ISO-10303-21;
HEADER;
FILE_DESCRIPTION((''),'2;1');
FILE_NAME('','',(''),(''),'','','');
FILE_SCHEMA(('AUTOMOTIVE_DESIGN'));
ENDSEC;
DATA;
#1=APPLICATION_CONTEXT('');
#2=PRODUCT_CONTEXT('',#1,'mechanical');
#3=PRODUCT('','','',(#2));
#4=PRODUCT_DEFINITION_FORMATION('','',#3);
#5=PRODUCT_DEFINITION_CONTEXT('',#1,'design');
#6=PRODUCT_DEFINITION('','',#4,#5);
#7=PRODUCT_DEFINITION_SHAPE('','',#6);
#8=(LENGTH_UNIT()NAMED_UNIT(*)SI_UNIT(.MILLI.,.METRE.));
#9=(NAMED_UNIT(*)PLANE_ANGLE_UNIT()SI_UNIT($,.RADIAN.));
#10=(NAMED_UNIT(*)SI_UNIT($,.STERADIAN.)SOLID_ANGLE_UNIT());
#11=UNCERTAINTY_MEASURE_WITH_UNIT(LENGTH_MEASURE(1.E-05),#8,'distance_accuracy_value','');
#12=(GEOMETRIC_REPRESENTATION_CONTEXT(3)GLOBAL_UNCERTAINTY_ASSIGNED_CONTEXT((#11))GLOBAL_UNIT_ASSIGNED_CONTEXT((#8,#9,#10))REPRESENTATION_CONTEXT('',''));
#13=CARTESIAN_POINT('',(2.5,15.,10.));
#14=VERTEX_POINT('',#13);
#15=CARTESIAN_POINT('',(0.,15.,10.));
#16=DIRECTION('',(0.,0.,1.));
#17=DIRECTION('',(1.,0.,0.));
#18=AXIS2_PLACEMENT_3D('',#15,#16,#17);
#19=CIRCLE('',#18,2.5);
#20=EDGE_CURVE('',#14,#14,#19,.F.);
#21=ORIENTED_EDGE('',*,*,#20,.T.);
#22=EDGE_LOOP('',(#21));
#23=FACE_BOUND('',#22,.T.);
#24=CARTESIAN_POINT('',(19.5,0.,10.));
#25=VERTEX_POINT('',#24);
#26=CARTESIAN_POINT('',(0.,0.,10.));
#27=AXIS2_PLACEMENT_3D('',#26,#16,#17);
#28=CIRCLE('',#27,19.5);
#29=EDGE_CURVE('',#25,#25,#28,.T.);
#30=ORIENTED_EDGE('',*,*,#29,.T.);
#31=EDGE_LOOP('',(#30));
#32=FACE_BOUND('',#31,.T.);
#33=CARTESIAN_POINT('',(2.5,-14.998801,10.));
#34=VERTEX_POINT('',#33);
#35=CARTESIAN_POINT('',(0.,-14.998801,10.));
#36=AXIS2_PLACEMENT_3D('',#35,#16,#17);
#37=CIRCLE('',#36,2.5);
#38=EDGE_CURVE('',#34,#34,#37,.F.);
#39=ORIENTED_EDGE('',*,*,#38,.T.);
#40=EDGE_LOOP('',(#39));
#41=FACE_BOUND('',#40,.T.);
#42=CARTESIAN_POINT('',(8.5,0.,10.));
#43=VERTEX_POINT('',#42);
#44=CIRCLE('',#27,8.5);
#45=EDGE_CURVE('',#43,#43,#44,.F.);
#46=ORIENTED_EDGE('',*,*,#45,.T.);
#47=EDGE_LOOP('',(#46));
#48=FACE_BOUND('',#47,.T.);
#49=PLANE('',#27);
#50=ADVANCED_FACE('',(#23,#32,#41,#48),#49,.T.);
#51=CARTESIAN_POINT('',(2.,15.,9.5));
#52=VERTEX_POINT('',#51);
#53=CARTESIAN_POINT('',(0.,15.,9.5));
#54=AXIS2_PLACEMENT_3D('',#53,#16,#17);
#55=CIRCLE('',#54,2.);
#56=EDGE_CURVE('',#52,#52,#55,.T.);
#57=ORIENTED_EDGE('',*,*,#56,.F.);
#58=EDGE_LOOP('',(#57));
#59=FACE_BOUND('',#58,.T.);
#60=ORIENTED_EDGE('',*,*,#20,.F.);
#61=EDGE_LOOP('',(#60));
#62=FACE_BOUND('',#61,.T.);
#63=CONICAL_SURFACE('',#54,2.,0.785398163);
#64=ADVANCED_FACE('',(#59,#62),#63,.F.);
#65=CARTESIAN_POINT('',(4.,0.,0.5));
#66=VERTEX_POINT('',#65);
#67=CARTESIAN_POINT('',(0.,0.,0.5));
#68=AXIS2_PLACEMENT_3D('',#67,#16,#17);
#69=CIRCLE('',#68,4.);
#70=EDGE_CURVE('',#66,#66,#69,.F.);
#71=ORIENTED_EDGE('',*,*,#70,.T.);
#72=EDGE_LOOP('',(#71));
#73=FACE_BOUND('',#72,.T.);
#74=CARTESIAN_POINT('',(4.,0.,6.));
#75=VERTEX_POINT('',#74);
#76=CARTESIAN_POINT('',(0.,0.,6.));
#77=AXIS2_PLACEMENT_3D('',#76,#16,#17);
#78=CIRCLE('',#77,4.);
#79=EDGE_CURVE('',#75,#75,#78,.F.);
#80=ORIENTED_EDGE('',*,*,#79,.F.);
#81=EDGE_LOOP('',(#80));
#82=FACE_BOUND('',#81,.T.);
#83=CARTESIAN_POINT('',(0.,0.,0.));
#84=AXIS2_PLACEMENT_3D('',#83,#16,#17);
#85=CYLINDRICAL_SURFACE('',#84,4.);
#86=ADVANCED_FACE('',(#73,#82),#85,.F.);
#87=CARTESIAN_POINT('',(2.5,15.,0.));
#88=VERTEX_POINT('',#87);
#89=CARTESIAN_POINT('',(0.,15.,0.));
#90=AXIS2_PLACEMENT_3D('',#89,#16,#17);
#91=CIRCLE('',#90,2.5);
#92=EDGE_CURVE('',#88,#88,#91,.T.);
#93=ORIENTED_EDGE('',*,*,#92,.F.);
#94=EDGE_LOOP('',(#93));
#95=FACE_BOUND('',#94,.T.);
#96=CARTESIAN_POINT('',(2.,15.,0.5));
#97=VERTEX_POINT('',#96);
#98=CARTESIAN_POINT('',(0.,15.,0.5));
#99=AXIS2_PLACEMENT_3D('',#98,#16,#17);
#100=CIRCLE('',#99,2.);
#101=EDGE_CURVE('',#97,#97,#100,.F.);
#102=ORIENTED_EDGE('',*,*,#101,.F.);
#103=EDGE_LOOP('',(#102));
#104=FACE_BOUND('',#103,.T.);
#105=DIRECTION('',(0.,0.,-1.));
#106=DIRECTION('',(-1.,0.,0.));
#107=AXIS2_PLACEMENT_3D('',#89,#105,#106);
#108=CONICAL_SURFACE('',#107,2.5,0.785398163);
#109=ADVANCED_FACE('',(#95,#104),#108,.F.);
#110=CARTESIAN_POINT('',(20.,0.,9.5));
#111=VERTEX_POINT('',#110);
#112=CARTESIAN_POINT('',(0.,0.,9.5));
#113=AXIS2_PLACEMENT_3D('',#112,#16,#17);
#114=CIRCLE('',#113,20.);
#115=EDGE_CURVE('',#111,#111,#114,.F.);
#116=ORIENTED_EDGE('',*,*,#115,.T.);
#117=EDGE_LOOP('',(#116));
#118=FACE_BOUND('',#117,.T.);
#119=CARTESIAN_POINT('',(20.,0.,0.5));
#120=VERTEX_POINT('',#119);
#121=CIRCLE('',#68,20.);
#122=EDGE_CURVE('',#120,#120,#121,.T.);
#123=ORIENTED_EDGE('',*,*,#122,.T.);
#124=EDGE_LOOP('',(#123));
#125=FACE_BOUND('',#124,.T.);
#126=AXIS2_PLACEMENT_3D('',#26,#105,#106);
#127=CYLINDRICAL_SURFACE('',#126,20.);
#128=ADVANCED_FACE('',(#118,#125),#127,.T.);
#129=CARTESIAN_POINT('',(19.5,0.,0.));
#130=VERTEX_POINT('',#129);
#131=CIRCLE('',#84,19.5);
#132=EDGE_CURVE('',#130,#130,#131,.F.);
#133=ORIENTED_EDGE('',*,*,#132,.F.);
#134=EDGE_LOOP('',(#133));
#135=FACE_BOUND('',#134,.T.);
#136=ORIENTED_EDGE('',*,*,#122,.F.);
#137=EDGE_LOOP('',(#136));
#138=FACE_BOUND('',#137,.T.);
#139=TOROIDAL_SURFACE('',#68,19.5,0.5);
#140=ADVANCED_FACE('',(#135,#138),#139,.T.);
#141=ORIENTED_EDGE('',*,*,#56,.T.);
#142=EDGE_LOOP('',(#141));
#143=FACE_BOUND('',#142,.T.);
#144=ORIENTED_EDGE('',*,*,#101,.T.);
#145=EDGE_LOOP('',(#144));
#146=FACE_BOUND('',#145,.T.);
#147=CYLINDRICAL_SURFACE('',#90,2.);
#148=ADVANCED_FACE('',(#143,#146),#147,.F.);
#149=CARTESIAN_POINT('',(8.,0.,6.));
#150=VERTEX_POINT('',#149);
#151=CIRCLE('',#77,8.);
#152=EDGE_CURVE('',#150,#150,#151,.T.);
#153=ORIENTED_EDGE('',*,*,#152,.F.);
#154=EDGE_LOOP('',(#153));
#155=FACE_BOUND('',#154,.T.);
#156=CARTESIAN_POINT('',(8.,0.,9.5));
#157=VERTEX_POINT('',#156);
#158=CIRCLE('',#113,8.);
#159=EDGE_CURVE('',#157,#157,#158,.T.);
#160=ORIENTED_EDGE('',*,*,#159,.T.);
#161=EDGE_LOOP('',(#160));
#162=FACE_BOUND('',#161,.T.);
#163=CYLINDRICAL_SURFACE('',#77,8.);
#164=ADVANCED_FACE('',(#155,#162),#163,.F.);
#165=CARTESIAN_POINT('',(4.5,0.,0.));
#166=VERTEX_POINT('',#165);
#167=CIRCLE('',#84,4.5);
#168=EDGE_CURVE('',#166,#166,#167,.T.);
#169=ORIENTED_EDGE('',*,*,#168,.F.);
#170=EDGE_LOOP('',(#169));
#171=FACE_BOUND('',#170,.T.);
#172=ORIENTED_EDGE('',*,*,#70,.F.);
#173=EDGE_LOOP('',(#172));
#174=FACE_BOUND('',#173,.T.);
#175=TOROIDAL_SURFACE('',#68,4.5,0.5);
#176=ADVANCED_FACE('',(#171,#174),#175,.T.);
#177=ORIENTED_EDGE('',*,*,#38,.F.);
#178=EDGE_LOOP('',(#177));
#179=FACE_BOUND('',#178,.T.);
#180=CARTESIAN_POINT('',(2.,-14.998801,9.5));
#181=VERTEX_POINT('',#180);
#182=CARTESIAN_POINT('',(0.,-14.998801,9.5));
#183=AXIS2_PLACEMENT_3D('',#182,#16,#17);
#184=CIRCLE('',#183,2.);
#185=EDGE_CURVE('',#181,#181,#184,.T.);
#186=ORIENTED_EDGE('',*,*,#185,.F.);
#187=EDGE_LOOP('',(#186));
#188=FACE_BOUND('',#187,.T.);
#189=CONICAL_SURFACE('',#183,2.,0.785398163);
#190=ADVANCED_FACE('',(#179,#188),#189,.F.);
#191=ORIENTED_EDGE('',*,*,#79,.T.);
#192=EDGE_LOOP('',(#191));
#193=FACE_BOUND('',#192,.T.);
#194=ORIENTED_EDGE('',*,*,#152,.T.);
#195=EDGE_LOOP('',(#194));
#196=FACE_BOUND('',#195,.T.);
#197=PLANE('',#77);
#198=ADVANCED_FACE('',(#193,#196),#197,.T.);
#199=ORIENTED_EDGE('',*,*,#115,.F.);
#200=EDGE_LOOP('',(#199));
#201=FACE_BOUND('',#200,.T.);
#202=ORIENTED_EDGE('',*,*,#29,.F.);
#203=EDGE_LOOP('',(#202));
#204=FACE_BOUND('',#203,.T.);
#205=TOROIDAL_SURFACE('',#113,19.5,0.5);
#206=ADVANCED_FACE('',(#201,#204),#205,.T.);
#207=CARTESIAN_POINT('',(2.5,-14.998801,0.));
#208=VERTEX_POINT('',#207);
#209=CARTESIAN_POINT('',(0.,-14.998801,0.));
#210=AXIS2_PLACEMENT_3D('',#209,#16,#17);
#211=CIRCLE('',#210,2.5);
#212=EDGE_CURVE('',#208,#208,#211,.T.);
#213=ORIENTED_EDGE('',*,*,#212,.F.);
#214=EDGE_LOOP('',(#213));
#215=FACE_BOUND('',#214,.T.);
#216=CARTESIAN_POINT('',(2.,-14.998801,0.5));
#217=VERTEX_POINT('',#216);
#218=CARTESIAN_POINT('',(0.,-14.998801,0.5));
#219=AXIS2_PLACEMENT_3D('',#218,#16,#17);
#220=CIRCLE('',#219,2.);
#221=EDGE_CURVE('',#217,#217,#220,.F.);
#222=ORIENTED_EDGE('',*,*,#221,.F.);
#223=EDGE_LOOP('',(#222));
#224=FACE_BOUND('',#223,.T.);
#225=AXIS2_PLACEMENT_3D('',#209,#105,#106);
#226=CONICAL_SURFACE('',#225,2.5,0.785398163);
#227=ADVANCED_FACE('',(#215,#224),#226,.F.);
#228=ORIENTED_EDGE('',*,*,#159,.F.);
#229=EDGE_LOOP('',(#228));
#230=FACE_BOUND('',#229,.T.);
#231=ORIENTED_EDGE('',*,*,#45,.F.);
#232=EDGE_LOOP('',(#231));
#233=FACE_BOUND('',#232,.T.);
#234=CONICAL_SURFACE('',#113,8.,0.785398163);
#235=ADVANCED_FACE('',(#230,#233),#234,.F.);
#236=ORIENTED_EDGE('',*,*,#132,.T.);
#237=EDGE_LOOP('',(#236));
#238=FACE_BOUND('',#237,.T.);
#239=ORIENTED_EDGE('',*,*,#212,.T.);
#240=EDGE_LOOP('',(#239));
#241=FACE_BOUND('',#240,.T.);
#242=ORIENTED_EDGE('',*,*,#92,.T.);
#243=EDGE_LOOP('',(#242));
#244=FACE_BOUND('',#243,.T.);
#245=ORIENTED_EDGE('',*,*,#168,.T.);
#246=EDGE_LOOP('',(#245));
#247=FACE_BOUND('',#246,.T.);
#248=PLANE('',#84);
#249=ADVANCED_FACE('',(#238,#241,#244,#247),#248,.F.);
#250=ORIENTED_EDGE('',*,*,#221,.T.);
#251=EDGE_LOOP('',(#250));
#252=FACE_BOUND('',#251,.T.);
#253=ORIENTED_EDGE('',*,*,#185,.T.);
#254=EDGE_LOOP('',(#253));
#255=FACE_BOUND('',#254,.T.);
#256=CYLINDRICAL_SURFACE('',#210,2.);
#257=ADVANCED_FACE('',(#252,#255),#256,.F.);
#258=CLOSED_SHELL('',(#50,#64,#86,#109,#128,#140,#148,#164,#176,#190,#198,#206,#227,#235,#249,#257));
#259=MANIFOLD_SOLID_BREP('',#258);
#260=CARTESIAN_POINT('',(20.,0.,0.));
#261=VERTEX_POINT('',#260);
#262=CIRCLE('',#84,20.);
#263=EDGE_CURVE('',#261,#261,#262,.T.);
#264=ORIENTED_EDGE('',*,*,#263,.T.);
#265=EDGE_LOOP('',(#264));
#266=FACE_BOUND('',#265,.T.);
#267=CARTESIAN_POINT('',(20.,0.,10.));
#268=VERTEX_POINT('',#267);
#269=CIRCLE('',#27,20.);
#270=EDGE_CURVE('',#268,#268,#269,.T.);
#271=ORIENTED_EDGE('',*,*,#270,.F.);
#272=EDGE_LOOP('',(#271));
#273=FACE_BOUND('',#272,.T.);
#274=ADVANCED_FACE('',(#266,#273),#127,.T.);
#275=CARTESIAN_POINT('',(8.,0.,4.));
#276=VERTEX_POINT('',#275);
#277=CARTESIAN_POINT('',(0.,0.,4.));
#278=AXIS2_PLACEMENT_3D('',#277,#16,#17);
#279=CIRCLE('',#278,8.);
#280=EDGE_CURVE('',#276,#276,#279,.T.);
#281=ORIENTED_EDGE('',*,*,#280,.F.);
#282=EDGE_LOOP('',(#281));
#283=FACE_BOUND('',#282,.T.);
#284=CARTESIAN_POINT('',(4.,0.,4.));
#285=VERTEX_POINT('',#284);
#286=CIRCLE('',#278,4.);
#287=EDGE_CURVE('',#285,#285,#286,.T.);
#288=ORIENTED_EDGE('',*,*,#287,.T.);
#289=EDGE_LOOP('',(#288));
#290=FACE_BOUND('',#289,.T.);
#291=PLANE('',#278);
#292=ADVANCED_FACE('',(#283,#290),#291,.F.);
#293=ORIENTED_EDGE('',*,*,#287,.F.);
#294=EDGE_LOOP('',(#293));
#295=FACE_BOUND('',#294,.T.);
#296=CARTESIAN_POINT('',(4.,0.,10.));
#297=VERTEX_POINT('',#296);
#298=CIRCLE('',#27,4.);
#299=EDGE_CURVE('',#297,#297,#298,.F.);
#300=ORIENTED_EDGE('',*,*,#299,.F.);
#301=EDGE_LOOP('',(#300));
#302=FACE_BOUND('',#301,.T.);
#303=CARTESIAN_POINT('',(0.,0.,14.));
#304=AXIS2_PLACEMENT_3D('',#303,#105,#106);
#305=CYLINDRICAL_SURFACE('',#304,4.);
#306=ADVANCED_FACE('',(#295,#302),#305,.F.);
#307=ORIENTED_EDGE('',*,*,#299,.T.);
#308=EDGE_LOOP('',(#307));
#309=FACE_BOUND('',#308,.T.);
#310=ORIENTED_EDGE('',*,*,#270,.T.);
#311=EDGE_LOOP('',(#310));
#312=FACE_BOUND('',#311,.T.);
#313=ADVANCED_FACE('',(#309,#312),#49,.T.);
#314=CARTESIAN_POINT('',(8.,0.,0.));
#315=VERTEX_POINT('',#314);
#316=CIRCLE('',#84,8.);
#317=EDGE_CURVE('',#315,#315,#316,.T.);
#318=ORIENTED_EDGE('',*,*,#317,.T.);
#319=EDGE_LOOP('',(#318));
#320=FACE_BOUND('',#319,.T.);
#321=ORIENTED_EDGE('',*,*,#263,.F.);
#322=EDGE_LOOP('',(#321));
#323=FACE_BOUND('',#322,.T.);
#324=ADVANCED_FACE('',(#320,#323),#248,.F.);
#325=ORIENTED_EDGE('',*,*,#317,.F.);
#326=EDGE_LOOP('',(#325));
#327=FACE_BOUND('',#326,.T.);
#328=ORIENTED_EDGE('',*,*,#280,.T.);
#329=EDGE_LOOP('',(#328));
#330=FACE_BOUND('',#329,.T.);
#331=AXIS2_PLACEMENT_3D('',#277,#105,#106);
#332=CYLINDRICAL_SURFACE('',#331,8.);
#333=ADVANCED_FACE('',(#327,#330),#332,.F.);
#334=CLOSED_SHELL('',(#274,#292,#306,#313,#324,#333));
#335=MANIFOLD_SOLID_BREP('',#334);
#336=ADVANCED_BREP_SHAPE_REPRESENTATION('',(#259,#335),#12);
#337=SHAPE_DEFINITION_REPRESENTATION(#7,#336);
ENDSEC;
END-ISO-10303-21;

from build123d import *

# Parameters (mm, degrees)
SKETCH_1_R          = 20
EXTRUDE_1_DEPTH     = 10
SKETCH_2_R          = 4
CUT_EXTRUDE_1_DEPTH = 14
SKETCH_3_R          = 8
CUT_EXTRUDE_2_DEPTH = 4
SKETCH_4_R          = 20
EXTRUDE_2_DEPTH     = 10
CUT_EXTRUDE_START   = -10
SKETCH_5_R          = 4
CUT_EXTRUDE_3_DEPTH = 10
CUT_EXTRUDE_START_2 = -4
SKETCH_6_R          = 8
CUT_EXTRUDE_4_DEPTH = 4
SKETCH_7_R          = 2
CUT_EXTRUDE_5_DEPTH = 10
FILLET_1_R          = 0.5
CHAMFER_1_SIZE      = 0.5
FILLET_2_R          = 0.5
CHAMFER_3_SIZE      = 0.5


with BuildPart() as part:
    # 草图1 → 凸台-拉伸1 (new body)
    with BuildSketch(Plane.XY):
        Circle(SKETCH_1_R)
    extrude(amount=EXTRUDE_1_DEPTH)

    # 草图2 → 切除-拉伸1 (cut)
    with BuildSketch(Plane.XY):
        Circle(SKETCH_2_R)
    extrude(amount=CUT_EXTRUDE_1_DEPTH, mode=Mode.SUBTRACT)

    # 草图3 → 切除-拉伸2 (cut)
    with BuildSketch(Plane.XY):
        Circle(SKETCH_3_R)
    extrude(amount=CUT_EXTRUDE_2_DEPTH, mode=Mode.SUBTRACT)


with BuildPart() as body_2:
    # 草图4 → 凸台-拉伸2 (new body)
    with BuildSketch(Plane.XY):
        Circle(SKETCH_4_R)
    extrude(amount=EXTRUDE_2_DEPTH)

    # 草图5 → 切除-拉伸3 (cut)
    with BuildSketch(Plane.XY.offset(10).offset(CUT_EXTRUDE_START)):
        Circle(SKETCH_5_R)
    extrude(amount=CUT_EXTRUDE_3_DEPTH, mode=Mode.SUBTRACT)

    # 草图6 → 切除-拉伸4 (cut)
    with BuildSketch(Plane.XY.offset(10).offset(CUT_EXTRUDE_START_2)):
        Circle(SKETCH_6_R)
    extrude(amount=CUT_EXTRUDE_4_DEPTH, mode=Mode.SUBTRACT)

    # 草图7 → 切除-拉伸5 (cut)
    with BuildSketch(Plane.XY.offset(10)):
        with Locations((0, -14.998800891)):
            Circle(SKETCH_7_R)
        with Locations((0, 15)):
            Circle(SKETCH_7_R)
    extrude(amount=-CUT_EXTRUDE_5_DEPTH, mode=Mode.SUBTRACT)

    # 圆角1
    fillet_1_edges = [body_2.edges().sort_by_distance(p)[0] for p in [
        (-20, 0, 0),
        (-20, 0, 10),
    ]]
    fillet(fillet_1_edges, radius=FILLET_1_R)

    # 倒角1
    chamfer_1_edges = [body_2.edges().sort_by_distance(p)[0] for p in [
        (-8, 0, 10),
    ]]
    chamfer(chamfer_1_edges, length=CHAMFER_1_SIZE)

    # 圆角2
    fillet_2_edges = [body_2.edges().sort_by_distance(p)[0] for p in [
        (-4, 0, 0),
    ]]
    fillet(fillet_2_edges, radius=FILLET_2_R)

    # 倒角3
    chamfer_3_edges = [body_2.edges().sort_by_distance(p)[0] for p in [
        (-2, -14.998800891, 0),
        (-2, -14.998800891, 10),
        (-2, 15, 0),
        (-2, 15, 10),
    ]]
    chamfer(chamfer_3_edges, length=CHAMFER_3_SIZE)


solid = Compound([part.part, body_2.part])
